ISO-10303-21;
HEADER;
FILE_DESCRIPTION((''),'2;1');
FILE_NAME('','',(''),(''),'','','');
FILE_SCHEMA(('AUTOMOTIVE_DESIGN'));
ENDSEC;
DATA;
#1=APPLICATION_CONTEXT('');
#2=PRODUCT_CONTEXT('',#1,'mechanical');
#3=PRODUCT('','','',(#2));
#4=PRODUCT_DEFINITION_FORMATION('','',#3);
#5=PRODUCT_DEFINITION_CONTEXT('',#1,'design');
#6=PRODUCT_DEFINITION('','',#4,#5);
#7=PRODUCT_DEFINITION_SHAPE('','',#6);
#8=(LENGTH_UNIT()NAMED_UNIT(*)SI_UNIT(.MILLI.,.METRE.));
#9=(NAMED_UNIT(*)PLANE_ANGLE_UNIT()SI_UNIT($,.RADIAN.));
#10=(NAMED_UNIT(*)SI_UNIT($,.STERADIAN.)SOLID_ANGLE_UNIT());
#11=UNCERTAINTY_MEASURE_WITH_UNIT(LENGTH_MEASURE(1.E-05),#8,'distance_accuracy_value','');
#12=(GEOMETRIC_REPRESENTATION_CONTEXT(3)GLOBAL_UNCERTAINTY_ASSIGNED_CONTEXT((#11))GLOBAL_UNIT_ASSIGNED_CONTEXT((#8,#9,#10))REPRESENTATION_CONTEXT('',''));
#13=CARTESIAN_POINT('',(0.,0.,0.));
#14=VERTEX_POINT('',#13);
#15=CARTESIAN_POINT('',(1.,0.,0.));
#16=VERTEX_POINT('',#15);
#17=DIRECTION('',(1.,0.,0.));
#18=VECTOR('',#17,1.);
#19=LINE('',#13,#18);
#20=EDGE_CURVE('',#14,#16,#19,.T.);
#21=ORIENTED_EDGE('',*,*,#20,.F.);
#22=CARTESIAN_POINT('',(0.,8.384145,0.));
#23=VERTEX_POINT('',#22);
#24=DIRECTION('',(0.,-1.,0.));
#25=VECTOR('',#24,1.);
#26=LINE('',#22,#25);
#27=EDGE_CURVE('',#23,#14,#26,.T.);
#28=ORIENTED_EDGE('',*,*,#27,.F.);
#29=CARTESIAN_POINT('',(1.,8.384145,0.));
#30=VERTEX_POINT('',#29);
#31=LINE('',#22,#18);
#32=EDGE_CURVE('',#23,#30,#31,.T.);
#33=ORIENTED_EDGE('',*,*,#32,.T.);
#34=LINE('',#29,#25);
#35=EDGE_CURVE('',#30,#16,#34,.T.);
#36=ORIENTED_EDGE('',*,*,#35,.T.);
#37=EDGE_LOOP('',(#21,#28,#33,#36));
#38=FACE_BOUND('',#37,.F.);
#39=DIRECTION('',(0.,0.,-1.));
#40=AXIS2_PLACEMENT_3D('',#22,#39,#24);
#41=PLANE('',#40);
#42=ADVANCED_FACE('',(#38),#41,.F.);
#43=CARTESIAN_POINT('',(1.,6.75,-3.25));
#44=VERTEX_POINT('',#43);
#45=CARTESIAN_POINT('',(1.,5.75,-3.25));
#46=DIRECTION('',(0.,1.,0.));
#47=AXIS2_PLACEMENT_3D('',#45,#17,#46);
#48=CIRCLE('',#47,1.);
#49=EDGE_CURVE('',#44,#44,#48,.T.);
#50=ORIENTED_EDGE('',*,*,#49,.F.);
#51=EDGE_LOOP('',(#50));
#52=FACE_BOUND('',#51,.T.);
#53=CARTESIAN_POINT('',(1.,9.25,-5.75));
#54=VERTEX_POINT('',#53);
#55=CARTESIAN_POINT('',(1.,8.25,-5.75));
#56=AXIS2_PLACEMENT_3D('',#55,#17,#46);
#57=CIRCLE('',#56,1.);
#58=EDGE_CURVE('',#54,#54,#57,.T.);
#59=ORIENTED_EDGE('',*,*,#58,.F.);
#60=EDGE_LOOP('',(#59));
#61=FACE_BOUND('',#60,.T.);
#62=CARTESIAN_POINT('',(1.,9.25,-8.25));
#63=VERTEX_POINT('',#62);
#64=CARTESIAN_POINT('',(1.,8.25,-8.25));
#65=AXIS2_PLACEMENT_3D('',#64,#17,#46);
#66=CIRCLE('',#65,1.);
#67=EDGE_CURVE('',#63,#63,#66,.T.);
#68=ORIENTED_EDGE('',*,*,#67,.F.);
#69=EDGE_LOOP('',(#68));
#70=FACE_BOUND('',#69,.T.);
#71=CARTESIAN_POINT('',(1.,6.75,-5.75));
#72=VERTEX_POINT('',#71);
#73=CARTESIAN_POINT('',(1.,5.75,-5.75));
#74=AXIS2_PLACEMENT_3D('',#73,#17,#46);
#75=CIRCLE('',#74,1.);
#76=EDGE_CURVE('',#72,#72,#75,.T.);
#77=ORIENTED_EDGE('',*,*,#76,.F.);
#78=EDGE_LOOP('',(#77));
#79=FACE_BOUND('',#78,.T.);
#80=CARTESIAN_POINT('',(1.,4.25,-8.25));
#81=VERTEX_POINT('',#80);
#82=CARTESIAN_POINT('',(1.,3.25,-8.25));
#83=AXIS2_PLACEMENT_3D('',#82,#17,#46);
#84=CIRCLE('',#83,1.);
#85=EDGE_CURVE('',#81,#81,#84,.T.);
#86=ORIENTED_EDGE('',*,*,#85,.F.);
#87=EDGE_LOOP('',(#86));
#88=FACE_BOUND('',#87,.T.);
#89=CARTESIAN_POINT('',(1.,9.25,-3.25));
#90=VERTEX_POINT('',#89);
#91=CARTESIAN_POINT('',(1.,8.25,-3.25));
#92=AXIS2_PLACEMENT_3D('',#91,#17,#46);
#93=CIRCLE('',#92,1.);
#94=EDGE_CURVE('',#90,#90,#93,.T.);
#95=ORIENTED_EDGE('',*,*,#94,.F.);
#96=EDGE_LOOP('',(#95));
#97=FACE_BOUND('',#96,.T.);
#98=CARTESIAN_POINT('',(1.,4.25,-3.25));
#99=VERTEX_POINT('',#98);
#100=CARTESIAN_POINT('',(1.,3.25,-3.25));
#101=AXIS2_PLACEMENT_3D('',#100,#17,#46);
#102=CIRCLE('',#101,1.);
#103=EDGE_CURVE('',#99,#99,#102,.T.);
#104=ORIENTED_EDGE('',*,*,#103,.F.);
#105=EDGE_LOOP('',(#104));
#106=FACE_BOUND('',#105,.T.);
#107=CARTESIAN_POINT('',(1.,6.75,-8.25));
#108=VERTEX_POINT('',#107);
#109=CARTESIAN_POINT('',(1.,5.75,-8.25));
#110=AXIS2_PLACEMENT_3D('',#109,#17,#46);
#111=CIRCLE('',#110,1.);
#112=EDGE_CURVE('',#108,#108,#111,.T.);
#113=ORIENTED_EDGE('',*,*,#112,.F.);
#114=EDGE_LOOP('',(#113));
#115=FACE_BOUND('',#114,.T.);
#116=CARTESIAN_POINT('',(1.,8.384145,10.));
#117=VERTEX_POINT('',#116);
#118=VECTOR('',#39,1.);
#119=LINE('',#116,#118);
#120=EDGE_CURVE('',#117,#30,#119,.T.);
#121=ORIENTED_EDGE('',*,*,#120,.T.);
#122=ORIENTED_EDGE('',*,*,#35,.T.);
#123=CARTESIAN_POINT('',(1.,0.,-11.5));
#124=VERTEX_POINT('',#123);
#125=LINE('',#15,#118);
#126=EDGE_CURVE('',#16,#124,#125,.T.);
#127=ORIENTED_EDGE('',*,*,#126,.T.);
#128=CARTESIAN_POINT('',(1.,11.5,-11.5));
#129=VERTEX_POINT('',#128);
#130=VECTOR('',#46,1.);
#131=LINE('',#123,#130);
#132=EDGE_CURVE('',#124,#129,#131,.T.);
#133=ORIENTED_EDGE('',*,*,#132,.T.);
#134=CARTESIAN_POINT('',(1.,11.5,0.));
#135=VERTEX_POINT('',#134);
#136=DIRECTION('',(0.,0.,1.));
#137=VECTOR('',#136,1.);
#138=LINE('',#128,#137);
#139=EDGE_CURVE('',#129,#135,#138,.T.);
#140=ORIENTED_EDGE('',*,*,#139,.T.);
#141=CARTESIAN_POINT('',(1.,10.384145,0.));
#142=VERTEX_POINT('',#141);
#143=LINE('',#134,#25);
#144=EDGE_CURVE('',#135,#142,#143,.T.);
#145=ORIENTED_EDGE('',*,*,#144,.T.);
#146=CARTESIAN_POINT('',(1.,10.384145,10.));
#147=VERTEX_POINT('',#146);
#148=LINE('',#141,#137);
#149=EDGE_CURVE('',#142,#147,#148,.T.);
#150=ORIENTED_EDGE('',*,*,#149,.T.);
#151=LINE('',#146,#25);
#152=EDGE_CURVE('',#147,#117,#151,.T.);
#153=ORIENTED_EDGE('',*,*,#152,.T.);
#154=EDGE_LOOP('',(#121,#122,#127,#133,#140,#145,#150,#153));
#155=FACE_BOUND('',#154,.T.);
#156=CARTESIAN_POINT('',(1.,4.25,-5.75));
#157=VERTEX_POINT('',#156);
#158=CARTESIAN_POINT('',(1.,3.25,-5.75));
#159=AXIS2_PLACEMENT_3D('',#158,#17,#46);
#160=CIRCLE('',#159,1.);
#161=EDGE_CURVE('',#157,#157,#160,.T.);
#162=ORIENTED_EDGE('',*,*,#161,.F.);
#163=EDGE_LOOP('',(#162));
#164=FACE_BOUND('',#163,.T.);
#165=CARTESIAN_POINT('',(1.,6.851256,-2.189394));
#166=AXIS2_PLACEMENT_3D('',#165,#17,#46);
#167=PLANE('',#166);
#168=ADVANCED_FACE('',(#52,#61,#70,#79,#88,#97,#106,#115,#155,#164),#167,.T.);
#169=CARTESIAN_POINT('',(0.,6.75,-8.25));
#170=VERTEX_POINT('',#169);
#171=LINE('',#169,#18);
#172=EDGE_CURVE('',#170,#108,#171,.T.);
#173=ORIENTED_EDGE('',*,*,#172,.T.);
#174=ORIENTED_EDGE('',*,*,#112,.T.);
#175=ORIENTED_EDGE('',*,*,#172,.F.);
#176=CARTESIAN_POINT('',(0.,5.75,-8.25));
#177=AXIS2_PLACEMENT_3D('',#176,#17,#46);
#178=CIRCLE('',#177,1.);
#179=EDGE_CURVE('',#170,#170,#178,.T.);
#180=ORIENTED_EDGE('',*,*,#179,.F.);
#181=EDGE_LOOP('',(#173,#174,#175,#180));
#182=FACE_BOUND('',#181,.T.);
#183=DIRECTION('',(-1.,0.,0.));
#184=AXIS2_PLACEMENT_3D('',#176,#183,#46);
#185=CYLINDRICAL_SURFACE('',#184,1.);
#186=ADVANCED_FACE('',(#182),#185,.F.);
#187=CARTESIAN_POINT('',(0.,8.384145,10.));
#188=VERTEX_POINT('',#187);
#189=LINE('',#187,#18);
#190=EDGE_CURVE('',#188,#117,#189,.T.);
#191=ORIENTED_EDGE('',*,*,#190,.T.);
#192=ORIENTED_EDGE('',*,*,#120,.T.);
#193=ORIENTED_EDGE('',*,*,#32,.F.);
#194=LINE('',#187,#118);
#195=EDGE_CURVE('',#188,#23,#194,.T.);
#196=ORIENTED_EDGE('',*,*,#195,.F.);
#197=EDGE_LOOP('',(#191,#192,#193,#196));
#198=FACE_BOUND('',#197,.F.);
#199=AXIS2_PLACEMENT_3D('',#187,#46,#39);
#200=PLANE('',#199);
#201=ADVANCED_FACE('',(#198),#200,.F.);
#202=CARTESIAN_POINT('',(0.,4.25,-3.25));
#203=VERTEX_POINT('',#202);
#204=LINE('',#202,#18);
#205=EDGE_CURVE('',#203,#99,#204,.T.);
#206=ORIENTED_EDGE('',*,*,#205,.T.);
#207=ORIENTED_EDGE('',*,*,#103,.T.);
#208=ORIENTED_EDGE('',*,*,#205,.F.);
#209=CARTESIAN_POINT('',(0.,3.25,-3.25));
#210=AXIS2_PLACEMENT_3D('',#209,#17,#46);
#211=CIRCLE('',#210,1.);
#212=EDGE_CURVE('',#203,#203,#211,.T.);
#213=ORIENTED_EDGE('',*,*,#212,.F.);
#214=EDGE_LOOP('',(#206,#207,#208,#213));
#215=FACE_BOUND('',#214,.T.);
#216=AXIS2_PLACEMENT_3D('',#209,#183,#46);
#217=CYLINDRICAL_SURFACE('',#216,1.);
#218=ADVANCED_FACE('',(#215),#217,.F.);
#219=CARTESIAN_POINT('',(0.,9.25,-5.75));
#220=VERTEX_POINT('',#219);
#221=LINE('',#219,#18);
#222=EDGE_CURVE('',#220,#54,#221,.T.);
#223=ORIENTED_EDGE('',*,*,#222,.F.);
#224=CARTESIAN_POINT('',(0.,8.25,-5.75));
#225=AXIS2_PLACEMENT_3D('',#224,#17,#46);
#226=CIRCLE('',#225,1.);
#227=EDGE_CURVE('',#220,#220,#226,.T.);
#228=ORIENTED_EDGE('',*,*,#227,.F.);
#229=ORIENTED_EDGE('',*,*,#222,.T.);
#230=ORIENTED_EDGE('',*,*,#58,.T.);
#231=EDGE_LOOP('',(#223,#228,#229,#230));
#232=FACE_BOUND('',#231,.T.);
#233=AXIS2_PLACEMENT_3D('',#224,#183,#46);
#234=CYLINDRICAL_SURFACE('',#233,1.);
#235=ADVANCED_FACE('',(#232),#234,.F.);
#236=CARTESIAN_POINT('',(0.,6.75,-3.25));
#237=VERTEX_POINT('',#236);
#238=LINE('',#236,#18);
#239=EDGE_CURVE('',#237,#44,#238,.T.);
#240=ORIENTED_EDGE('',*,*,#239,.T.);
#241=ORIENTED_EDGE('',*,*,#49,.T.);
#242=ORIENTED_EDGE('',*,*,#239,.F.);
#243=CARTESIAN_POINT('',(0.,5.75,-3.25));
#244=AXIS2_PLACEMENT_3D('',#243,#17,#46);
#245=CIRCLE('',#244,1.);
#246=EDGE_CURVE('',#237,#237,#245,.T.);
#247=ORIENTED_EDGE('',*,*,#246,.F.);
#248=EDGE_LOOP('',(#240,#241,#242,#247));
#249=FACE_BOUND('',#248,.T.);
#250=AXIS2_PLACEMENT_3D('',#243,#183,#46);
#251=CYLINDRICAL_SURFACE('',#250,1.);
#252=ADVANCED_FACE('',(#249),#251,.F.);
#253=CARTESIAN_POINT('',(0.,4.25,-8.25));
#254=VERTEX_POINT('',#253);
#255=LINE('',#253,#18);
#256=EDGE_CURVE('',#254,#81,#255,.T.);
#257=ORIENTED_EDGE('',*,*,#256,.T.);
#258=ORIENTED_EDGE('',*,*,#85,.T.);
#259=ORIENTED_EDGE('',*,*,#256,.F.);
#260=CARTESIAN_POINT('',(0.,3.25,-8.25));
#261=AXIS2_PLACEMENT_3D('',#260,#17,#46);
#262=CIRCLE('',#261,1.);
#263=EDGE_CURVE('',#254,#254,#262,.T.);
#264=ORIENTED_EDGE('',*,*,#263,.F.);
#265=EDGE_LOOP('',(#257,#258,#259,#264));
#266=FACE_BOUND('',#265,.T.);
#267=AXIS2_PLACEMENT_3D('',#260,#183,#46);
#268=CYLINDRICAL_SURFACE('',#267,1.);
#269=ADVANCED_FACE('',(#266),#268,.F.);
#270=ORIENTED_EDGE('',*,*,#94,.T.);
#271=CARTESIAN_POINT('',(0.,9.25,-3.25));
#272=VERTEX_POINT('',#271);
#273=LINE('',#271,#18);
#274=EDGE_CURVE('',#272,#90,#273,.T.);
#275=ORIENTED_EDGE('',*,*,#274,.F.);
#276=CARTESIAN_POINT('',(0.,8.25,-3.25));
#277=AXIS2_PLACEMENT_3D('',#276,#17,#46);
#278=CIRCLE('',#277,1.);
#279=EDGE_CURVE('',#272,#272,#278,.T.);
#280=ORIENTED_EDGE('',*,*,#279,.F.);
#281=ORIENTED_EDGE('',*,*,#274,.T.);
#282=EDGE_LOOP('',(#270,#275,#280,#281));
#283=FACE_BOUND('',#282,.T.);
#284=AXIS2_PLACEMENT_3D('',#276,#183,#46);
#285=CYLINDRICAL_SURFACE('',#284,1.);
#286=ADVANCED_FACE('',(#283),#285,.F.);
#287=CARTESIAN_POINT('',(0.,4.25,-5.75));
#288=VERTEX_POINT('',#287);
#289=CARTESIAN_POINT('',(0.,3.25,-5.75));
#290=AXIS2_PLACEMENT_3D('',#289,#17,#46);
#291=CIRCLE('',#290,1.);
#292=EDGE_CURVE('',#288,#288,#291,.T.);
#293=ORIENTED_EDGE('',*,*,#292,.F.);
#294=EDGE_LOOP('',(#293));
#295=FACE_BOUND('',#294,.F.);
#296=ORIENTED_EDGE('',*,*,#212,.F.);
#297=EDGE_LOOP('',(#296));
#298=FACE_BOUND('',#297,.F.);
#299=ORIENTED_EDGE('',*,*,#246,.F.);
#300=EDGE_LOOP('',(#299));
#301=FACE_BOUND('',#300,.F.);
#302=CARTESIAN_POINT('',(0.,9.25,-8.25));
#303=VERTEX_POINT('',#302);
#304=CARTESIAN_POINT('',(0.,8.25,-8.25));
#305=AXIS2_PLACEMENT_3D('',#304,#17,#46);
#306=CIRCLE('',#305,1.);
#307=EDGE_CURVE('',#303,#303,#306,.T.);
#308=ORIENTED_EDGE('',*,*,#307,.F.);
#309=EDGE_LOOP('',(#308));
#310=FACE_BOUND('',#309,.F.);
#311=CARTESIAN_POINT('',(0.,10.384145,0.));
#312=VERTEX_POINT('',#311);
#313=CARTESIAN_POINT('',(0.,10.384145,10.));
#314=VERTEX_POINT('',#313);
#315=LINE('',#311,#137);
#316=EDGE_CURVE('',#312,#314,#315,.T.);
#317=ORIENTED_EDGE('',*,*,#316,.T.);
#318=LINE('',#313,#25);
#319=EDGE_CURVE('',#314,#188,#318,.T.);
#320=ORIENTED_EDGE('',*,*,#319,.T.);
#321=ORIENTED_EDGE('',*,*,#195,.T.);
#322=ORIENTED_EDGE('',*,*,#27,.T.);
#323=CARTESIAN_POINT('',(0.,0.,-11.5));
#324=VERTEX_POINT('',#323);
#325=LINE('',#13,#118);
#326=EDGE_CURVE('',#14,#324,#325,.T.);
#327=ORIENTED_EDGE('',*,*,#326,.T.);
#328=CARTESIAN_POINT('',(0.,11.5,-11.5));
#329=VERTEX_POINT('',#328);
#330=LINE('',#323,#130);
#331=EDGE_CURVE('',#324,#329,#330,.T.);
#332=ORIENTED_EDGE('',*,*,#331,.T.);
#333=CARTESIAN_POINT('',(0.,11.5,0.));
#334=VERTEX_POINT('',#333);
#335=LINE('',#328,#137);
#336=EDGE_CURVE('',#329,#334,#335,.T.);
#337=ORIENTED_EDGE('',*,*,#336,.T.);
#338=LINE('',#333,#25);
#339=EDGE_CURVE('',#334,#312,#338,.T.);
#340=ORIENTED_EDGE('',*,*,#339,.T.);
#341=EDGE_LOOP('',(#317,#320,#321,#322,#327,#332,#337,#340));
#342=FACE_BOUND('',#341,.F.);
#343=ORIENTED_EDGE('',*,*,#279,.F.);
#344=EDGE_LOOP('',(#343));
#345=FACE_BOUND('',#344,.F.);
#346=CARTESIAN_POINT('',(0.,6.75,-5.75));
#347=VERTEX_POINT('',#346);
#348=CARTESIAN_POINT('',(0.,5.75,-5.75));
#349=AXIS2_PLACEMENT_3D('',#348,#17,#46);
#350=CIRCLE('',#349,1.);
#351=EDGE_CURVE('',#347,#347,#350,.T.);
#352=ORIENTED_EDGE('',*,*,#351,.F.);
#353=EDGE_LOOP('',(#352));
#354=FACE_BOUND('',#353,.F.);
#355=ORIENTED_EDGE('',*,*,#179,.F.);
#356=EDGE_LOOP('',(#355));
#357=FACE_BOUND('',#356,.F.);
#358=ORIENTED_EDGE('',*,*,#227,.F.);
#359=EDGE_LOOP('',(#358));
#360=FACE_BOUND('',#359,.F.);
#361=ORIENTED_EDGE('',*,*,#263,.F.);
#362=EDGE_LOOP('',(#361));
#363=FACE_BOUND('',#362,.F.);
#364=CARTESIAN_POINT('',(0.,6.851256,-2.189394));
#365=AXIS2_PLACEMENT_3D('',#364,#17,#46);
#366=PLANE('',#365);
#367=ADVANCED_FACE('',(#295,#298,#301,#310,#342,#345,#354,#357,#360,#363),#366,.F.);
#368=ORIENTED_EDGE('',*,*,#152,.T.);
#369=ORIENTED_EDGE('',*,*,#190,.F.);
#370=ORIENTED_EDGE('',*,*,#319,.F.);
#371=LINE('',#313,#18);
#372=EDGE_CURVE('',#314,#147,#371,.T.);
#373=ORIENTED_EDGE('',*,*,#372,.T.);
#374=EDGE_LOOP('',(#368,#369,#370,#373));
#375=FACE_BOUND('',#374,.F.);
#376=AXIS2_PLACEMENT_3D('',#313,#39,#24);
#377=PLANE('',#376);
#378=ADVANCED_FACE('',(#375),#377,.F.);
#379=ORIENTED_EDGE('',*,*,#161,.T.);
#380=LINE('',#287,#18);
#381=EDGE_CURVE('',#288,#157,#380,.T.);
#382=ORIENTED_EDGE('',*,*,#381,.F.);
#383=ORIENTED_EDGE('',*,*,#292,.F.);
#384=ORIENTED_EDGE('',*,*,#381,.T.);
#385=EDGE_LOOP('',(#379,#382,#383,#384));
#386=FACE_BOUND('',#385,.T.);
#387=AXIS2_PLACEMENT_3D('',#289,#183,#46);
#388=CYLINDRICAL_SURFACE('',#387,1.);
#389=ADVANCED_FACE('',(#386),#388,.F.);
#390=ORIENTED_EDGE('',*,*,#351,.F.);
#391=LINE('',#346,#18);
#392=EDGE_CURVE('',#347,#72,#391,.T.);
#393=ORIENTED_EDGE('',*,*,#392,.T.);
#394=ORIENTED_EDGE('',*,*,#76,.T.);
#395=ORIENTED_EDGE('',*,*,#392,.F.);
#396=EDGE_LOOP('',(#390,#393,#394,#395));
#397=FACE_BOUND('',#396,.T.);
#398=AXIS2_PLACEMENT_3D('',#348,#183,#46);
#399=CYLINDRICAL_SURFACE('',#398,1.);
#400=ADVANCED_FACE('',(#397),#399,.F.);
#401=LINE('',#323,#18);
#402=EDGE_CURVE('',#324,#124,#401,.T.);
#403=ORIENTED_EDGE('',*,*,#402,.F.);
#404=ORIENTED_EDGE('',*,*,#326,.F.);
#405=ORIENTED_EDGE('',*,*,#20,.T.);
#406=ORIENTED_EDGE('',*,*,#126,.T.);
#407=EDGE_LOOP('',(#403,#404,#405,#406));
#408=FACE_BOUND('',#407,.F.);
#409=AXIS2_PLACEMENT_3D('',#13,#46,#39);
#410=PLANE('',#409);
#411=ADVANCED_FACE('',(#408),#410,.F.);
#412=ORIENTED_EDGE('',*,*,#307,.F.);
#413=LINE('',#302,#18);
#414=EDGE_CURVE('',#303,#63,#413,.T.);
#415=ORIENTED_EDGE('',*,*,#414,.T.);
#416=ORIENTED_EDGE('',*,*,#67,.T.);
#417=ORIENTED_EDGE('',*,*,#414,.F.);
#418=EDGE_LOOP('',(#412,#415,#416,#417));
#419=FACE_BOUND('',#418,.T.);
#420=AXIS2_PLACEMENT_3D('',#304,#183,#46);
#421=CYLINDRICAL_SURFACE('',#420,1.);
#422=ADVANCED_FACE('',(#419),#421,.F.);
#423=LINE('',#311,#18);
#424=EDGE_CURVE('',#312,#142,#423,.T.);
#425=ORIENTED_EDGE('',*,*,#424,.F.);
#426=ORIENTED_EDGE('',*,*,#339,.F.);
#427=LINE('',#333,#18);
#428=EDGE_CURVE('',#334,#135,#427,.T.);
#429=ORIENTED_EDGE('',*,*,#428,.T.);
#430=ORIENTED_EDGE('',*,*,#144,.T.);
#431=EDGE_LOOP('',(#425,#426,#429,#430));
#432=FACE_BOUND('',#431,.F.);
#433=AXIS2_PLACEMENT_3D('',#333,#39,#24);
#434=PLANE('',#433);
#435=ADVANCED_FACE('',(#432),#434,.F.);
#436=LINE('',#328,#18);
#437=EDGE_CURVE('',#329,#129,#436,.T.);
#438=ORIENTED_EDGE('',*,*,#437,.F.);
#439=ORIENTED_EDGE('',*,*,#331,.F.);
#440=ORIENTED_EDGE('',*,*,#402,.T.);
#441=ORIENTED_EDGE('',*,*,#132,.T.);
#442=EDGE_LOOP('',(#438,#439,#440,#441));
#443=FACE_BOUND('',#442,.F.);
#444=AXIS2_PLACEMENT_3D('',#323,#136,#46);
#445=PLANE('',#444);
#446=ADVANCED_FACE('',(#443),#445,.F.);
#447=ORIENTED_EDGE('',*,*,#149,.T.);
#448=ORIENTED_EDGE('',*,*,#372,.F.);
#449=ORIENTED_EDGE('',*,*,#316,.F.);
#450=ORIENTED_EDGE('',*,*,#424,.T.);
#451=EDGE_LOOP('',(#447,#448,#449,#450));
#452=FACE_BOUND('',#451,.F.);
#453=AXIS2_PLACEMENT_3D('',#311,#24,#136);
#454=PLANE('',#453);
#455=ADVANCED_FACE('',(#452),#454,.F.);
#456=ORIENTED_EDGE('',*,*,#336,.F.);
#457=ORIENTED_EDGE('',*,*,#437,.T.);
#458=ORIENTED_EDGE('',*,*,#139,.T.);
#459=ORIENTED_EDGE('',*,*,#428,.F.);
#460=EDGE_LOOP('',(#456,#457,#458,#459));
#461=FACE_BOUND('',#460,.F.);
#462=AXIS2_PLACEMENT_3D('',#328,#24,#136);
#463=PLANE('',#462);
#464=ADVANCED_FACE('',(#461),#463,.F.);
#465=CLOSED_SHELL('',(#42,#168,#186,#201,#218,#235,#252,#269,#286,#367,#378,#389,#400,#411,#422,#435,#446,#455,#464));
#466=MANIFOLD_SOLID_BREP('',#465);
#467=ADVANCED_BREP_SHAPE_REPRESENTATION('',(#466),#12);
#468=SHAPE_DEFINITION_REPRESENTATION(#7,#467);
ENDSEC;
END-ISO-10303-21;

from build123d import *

# Parameters (mm, degrees)
F0_R     = 1
F1_DEPTH = 1


# Not quite as in the source:
# - a feature names something its author has since deleted; it is built from what else it names


with BuildPart() as f1:
    # F0 (on Right) → F1 (new body)
    with BuildSketch(Plane.YZ):
        Polygon((8.384144865, 0), (0, 0), (0, -11.5), (11.5, -11.5), (11.5, 0), (10.384144865, 0), (10.384144865, 10), (8.384144865, 10), align=None)
        with Locations((3.25, -8.25)):
            Circle(F0_R, mode=Mode.SUBTRACT)
        with Locations((3.25, -5.75)):
            Circle(F0_R, mode=Mode.SUBTRACT)
        with Locations((3.25, -3.25)):
            Circle(F0_R, mode=Mode.SUBTRACT)
        with Locations((5.75, -8.25)):
            Circle(F0_R, mode=Mode.SUBTRACT)
        with Locations((8.25, -8.25)):
            Circle(F0_R, mode=Mode.SUBTRACT)
        with Locations((5.75, -5.75)):
            Circle(F0_R, mode=Mode.SUBTRACT)
        with Locations((8.25, -5.75)):
            Circle(F0_R, mode=Mode.SUBTRACT)
        with Locations((5.75, -3.25)):
            Circle(F0_R, mode=Mode.SUBTRACT)
        with Locations((8.25, -3.25)):
            Circle(F0_R, mode=Mode.SUBTRACT)
    extrude(amount=F1_DEPTH)


solid = f1.part
